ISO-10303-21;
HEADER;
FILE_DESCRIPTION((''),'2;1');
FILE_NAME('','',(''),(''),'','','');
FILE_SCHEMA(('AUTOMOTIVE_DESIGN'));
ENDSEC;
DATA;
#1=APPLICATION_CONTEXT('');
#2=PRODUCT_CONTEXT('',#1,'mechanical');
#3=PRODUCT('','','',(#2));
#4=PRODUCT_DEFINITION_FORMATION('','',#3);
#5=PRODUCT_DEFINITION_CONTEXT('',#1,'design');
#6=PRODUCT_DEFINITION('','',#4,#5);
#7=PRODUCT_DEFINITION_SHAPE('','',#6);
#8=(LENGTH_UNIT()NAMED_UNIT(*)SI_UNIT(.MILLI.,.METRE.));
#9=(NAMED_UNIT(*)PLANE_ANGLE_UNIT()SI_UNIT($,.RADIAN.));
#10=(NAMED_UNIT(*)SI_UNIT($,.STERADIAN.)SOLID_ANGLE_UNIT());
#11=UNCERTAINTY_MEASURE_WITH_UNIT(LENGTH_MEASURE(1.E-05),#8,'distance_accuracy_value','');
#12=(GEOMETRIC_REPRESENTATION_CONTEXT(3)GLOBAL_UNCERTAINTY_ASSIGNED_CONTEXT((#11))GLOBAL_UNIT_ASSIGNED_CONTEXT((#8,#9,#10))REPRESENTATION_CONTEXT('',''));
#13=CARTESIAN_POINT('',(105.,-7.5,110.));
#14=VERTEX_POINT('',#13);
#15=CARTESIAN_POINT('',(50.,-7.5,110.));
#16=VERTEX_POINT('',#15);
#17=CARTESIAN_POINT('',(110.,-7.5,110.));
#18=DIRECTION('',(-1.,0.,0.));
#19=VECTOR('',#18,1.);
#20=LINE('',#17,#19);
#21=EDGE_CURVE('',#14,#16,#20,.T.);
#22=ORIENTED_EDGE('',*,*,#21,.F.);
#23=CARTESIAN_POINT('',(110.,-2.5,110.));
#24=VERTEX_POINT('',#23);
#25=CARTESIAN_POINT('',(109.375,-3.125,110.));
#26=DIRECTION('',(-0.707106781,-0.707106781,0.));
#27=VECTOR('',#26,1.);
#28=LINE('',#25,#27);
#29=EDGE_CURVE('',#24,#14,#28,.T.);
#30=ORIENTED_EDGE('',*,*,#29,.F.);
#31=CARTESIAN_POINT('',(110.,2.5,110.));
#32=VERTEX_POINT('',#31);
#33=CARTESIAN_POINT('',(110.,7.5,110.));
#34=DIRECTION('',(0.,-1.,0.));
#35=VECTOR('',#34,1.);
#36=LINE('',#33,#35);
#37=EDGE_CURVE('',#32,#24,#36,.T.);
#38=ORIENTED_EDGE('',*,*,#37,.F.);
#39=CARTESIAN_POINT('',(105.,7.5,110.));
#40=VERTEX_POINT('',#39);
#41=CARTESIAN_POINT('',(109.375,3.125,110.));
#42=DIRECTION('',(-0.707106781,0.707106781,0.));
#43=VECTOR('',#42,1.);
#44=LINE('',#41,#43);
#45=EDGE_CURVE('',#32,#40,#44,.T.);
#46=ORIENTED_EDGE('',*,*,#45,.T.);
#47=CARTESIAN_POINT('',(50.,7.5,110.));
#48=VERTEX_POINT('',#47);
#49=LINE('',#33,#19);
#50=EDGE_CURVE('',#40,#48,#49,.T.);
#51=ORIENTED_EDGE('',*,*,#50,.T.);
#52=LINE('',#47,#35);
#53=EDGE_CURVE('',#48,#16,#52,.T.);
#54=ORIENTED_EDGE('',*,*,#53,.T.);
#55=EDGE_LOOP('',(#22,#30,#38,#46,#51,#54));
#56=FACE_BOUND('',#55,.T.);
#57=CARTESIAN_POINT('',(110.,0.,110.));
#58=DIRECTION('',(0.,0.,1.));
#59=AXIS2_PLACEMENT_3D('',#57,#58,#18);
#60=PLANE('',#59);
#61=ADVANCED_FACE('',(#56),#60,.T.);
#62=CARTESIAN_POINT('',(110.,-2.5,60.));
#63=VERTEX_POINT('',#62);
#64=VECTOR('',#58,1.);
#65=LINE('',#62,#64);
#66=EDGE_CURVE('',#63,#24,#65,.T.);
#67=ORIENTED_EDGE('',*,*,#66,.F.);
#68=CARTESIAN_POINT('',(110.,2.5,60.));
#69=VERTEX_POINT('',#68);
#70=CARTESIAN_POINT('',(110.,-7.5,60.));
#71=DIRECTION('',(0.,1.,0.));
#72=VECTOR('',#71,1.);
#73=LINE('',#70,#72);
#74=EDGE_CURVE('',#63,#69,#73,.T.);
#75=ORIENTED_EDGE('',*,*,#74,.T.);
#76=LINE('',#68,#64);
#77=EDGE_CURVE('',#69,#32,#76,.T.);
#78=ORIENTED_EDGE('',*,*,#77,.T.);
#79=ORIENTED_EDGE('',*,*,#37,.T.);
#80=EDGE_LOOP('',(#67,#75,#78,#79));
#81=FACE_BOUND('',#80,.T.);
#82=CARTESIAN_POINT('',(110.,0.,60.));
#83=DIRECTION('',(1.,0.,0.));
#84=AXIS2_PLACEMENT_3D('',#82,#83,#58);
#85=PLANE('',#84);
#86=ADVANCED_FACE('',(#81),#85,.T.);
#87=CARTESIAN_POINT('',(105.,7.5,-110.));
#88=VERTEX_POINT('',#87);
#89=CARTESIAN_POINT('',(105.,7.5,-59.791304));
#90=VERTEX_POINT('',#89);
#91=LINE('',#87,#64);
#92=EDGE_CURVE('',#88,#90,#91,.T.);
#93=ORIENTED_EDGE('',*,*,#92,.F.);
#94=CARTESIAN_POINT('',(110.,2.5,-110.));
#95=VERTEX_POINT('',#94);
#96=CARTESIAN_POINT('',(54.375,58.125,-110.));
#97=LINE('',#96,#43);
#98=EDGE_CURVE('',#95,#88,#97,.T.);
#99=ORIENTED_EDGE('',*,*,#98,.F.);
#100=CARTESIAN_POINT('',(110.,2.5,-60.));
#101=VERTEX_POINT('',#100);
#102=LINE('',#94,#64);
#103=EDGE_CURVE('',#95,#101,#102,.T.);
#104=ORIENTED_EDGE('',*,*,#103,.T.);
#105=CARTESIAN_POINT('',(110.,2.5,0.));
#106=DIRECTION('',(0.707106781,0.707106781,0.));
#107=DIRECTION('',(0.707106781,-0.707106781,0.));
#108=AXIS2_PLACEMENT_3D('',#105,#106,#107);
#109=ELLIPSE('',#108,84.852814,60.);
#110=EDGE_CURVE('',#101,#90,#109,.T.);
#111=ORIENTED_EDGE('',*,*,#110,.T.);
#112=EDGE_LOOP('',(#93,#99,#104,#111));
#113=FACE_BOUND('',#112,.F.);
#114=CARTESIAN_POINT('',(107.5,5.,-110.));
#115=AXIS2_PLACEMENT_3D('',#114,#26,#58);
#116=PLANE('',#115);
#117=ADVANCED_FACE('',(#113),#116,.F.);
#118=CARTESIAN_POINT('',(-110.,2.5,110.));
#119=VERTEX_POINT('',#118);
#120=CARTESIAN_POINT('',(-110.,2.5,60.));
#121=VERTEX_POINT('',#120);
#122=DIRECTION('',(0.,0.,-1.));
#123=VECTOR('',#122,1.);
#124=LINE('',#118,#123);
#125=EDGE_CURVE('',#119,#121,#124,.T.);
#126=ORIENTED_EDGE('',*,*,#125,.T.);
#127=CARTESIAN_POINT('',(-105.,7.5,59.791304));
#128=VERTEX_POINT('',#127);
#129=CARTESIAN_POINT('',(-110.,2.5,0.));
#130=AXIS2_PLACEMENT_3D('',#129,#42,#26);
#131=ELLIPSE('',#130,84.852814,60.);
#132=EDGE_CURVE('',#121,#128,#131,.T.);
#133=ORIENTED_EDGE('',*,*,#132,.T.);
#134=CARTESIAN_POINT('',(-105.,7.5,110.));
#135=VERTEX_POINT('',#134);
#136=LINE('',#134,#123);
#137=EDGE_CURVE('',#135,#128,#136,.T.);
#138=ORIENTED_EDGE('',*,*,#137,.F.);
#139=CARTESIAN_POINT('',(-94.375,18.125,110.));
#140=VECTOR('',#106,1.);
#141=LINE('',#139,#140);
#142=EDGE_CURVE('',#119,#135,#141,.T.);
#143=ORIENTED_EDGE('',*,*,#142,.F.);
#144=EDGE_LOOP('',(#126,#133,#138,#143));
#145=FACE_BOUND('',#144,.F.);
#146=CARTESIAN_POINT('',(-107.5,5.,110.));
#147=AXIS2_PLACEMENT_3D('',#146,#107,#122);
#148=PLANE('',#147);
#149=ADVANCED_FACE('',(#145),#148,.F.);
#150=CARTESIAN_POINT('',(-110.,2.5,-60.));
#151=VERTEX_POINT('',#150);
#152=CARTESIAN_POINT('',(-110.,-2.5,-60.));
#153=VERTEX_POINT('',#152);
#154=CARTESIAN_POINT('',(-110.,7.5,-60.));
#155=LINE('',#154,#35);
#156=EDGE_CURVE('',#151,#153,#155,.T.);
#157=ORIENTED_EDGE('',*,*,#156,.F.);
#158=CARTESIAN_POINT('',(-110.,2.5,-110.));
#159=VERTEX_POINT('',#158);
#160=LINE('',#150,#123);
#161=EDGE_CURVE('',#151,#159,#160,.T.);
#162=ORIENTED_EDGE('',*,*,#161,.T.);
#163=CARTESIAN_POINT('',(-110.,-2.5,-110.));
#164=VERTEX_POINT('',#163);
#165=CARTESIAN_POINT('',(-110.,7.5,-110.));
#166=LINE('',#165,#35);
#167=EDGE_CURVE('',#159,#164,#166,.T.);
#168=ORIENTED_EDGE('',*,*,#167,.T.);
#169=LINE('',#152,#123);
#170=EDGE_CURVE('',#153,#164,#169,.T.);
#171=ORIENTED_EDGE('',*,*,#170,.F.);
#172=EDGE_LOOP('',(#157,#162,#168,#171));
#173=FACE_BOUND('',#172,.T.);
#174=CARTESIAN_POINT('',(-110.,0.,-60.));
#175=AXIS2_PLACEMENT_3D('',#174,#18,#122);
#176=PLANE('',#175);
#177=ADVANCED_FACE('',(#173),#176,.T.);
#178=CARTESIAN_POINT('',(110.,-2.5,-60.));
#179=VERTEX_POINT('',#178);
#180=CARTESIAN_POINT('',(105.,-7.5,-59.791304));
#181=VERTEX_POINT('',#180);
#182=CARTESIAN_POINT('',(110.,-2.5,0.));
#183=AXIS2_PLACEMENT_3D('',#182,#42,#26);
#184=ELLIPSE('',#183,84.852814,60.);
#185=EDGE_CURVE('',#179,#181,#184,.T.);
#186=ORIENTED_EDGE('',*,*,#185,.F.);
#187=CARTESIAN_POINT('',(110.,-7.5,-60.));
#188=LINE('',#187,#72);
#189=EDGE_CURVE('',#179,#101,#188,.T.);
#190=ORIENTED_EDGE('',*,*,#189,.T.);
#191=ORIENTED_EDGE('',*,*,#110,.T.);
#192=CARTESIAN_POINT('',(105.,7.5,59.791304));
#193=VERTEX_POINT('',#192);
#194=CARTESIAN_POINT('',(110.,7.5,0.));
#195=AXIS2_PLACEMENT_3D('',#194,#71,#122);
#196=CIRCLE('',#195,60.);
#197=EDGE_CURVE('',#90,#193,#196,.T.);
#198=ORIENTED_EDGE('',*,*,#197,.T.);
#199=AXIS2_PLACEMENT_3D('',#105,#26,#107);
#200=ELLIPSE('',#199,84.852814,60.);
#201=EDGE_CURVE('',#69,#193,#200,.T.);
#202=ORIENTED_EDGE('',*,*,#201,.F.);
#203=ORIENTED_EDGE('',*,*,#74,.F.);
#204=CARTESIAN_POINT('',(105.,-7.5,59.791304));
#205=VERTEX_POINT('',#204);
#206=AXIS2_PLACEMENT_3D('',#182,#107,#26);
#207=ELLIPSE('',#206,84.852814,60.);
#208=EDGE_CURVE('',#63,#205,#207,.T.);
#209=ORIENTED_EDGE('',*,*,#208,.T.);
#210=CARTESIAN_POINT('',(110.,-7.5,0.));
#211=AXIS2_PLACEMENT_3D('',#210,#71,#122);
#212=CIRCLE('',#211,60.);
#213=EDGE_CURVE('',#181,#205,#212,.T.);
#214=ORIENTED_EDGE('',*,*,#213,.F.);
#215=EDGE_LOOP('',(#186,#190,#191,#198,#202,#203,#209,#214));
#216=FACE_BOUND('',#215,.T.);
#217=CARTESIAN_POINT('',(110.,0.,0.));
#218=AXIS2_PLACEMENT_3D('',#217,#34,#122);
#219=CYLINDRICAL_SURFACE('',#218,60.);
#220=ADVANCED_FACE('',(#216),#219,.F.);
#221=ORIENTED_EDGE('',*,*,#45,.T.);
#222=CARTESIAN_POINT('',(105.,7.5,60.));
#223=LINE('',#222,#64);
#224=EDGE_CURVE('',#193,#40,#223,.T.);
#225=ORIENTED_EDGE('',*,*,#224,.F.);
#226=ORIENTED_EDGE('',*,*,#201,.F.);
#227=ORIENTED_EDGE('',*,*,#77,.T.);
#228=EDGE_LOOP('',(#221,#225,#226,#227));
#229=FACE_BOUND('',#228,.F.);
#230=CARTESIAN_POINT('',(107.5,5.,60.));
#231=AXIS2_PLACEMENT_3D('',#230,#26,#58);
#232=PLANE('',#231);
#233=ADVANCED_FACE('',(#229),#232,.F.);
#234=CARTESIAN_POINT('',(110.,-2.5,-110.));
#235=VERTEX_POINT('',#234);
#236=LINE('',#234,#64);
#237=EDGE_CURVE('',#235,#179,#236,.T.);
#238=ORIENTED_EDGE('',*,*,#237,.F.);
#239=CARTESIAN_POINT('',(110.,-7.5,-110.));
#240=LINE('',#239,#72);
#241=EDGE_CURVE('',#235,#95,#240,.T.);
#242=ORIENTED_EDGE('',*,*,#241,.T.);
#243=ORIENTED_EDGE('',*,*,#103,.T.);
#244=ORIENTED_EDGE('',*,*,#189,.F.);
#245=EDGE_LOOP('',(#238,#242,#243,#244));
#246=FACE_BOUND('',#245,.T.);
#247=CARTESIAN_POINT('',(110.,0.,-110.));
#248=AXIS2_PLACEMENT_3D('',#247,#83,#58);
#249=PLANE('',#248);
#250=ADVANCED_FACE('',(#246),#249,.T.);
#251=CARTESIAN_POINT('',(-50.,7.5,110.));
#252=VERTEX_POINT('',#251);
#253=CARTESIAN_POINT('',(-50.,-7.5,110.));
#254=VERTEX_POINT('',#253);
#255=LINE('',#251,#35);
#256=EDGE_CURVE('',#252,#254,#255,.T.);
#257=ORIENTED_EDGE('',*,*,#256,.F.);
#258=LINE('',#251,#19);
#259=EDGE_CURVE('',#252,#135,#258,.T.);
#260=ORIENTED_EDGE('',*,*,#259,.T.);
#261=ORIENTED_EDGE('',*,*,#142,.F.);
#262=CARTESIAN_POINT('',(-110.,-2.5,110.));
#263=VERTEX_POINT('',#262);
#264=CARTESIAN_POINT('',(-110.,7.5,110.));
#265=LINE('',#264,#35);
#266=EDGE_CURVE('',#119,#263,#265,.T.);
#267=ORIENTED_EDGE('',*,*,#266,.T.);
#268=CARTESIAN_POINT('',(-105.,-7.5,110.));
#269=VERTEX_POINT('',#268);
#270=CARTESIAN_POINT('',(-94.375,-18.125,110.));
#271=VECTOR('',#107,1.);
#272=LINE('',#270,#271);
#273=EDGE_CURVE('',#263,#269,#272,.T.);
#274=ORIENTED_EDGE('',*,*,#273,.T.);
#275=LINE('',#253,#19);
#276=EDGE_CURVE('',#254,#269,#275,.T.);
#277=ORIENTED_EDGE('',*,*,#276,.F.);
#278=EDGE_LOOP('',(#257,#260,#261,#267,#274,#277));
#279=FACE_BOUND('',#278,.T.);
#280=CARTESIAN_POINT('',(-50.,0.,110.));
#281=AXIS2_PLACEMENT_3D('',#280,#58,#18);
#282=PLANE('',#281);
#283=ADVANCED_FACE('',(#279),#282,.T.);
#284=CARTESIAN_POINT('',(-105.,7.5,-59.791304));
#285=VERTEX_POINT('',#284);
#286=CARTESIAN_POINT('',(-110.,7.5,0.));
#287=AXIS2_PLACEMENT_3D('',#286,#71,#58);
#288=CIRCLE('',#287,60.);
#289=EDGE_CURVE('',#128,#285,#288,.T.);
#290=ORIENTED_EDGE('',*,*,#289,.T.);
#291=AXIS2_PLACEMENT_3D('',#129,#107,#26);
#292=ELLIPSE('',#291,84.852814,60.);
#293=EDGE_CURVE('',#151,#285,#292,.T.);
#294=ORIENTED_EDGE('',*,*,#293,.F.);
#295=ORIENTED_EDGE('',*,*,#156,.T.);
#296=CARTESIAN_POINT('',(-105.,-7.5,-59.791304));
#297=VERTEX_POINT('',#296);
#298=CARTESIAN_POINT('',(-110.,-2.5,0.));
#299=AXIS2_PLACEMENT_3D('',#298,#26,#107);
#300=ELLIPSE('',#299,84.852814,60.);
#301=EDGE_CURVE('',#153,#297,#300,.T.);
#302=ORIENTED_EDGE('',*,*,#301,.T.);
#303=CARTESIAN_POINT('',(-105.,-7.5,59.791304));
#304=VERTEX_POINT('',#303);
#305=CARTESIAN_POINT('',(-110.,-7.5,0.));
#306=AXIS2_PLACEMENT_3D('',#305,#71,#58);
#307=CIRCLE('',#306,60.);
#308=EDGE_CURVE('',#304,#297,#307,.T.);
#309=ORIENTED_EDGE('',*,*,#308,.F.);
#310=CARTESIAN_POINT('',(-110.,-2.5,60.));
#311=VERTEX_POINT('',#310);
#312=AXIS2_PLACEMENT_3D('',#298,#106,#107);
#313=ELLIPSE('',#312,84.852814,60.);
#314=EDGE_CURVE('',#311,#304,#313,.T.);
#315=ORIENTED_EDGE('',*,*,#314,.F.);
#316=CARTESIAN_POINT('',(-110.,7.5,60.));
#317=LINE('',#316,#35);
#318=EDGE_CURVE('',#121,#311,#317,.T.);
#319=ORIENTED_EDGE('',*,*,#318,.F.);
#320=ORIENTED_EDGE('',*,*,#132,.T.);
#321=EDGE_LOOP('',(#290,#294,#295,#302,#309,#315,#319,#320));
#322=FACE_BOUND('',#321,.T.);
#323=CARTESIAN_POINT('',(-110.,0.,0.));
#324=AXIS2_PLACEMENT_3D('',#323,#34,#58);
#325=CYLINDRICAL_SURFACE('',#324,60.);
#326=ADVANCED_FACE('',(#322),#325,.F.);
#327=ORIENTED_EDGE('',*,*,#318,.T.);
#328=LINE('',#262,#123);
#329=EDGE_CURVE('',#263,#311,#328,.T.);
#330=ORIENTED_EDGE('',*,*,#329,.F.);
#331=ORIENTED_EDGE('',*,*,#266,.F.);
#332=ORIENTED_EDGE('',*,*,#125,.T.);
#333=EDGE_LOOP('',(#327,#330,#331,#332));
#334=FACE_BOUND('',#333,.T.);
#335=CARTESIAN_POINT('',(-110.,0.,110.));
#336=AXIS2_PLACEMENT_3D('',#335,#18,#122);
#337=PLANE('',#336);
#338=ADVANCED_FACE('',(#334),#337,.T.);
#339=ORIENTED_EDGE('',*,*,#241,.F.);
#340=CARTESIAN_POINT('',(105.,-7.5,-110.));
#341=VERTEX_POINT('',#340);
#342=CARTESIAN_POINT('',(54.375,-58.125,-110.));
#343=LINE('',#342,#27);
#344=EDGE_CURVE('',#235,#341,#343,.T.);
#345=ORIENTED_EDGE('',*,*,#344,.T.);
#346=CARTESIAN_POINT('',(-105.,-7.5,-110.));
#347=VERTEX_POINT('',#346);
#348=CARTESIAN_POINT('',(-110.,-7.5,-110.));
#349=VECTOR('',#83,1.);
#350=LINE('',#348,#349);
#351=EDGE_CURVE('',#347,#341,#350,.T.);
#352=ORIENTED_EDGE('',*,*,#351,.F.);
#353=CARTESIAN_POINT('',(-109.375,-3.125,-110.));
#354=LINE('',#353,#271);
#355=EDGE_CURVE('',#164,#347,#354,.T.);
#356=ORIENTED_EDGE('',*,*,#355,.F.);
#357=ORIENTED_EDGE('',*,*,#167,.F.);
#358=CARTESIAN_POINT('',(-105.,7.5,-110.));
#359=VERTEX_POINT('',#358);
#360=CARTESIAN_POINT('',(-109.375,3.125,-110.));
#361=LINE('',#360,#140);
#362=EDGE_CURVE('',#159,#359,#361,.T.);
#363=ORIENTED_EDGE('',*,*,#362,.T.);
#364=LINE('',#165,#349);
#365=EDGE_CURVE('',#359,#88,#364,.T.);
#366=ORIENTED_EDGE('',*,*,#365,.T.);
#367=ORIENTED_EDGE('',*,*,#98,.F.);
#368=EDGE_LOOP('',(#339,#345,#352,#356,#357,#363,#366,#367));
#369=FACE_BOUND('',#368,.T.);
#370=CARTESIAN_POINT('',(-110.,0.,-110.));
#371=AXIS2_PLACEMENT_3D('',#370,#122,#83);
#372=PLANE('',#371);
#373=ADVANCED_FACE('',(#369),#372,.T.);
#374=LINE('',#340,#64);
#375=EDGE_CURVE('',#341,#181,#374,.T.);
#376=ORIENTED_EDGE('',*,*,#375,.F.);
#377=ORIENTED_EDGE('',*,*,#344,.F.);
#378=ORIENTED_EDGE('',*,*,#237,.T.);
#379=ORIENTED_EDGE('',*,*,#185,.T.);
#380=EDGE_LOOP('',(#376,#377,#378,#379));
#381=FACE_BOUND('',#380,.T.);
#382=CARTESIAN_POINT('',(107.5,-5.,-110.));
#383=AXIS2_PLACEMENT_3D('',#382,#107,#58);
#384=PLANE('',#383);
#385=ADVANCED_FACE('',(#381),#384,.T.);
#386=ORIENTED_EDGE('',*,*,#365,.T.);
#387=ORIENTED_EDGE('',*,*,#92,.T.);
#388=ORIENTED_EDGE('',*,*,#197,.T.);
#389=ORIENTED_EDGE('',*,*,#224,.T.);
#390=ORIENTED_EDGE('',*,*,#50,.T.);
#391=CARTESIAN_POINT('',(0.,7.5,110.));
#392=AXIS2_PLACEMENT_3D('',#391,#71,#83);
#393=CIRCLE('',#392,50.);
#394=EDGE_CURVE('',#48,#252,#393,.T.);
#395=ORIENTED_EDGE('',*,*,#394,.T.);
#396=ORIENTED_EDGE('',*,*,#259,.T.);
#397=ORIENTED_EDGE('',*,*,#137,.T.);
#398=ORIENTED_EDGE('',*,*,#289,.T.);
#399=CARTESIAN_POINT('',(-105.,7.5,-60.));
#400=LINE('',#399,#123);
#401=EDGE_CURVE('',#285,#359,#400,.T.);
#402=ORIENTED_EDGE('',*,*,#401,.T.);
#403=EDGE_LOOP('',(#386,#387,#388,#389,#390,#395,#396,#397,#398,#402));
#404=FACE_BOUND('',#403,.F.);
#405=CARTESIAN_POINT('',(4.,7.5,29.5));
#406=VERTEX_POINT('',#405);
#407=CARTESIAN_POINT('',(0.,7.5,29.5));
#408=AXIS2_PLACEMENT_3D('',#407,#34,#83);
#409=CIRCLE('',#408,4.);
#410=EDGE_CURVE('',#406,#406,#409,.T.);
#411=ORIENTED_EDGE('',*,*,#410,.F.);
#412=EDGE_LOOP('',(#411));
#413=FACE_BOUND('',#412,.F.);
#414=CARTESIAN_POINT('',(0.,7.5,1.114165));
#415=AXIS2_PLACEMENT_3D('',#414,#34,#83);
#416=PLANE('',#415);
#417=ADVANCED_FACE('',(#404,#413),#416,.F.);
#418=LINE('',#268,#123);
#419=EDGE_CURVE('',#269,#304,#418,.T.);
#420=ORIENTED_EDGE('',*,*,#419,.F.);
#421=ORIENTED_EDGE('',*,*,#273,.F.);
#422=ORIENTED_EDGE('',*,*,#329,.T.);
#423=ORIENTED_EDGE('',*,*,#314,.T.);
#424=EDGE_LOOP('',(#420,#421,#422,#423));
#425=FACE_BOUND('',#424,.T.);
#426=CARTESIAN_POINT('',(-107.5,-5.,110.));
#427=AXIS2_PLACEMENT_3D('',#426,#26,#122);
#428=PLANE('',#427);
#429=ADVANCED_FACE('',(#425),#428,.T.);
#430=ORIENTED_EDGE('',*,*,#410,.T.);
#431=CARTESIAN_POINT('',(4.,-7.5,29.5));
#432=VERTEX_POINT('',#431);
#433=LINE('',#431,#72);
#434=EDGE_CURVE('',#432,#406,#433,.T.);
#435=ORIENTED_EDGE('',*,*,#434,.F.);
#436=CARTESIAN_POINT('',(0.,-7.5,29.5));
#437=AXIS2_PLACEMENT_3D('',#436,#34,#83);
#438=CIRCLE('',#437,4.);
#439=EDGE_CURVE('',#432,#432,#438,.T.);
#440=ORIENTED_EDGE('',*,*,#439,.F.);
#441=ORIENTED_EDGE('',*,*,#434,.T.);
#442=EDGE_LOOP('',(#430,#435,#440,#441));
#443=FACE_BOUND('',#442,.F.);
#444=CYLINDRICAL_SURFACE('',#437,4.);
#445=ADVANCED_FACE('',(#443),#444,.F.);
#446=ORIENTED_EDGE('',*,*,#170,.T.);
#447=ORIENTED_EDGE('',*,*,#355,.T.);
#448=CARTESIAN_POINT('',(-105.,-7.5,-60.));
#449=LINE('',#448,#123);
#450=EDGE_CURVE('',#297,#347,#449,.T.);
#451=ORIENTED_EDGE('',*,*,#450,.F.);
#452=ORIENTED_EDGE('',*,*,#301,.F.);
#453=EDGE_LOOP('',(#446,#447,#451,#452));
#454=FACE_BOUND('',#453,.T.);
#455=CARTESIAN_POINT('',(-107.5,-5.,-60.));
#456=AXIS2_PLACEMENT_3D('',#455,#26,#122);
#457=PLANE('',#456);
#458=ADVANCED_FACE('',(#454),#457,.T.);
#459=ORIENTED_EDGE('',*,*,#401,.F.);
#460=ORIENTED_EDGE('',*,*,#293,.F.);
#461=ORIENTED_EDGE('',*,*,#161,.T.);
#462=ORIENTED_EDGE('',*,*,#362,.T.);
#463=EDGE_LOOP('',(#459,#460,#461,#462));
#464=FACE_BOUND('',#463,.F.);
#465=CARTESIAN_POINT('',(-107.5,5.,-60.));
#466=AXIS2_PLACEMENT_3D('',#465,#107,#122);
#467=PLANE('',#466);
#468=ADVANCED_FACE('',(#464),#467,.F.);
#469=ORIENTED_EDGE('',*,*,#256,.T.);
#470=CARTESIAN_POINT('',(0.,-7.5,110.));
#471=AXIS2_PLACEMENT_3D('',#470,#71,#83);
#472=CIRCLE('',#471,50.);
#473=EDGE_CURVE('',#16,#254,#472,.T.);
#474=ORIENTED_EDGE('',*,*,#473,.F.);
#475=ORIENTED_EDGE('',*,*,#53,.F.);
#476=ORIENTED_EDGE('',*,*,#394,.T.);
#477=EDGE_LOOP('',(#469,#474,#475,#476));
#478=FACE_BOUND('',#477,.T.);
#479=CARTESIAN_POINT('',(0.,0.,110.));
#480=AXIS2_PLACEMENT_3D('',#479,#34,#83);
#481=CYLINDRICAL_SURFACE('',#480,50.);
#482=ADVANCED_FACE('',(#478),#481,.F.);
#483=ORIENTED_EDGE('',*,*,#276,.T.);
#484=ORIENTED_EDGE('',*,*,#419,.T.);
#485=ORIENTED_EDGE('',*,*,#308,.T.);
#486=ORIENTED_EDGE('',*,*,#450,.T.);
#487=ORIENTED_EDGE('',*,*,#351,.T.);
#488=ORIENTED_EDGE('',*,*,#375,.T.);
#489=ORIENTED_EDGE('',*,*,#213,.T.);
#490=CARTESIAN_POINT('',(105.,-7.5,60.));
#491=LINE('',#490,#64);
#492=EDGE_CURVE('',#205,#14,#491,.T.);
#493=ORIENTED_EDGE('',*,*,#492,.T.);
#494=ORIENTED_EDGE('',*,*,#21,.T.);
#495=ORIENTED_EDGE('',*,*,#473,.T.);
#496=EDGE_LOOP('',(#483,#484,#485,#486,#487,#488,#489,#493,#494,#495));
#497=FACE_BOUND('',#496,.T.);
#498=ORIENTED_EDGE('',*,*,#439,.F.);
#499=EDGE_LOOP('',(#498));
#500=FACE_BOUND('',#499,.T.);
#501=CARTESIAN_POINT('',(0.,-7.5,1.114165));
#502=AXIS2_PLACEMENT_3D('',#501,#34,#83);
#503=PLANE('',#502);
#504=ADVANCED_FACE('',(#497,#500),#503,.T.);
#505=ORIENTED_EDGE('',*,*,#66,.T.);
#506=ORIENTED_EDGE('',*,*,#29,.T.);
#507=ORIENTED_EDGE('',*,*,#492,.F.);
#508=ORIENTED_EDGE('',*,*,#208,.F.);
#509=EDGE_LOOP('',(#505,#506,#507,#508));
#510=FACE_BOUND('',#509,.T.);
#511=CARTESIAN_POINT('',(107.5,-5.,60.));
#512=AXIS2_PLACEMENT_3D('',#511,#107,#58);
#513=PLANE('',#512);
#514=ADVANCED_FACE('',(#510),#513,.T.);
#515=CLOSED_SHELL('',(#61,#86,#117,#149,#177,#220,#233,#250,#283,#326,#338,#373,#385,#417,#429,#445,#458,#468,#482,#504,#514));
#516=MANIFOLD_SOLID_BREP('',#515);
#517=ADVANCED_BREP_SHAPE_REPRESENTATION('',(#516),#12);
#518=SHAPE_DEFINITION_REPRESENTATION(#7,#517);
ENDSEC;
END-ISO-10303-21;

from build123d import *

# Parameters (mm, degrees)
F1_DEPTH = 7.5
F2_SIZE  = 5
F5_R     = 4
F6_DEPTH = 15.001


# Not quite as in the source:
# - two fillets or chamfers of one size are made in one step


with BuildPart() as f1:
    # F0 (on Front) → F1 (new body, symmetric)
    with BuildSketch(Plane.XZ):
        with BuildLine():
            Line((110, 60), (110, 110))
            Line((110, 110), (50, 110))
            ThreePointArc((50, 110), (0, 60), (-50, 110))
            Line((-50, 110), (-110, 110))
            Line((-110, 110), (-110, 60))
            ThreePointArc((-110, 60), (-67.5735931288, 42.4264068712), (-50, 0))
            ThreePointArc((-50, 0), (-67.5735931288, -42.4264068712), (-110, -60))
            Line((-110, -60), (-110, -110))
            Line((-110, -110), (110, -110))
            Line((110, -110), (110, -60))
            ThreePointArc((110, -60), (50, 0), (110, 60))
        make_face()
    extrude(amount=F1_DEPTH, both=True)

    # F2
    f2_edges = [f1.edges().sort_by_distance(p)[0] for p in [
        (-110, 7.5, -85),
        (-110, 7.5, 85),
        (110, 7.5, 85),
        (110, 7.5, -85),
        (110, -7.5, 85),
        (110, -7.5, -85),
        (-110, -7.5, -85),
        (-110, -7.5, 85),
    ]]
    chamfer(f2_edges, length=F2_SIZE)

    # F5 (on face) → F6 (cut, through all)
    with BuildSketch(Plane.XZ.offset(7.5)):
        with Locations((0, 29.5)):
            Circle(F5_R)
    extrude(amount=-F6_DEPTH, mode=Mode.SUBTRACT)


solid = f1.part
